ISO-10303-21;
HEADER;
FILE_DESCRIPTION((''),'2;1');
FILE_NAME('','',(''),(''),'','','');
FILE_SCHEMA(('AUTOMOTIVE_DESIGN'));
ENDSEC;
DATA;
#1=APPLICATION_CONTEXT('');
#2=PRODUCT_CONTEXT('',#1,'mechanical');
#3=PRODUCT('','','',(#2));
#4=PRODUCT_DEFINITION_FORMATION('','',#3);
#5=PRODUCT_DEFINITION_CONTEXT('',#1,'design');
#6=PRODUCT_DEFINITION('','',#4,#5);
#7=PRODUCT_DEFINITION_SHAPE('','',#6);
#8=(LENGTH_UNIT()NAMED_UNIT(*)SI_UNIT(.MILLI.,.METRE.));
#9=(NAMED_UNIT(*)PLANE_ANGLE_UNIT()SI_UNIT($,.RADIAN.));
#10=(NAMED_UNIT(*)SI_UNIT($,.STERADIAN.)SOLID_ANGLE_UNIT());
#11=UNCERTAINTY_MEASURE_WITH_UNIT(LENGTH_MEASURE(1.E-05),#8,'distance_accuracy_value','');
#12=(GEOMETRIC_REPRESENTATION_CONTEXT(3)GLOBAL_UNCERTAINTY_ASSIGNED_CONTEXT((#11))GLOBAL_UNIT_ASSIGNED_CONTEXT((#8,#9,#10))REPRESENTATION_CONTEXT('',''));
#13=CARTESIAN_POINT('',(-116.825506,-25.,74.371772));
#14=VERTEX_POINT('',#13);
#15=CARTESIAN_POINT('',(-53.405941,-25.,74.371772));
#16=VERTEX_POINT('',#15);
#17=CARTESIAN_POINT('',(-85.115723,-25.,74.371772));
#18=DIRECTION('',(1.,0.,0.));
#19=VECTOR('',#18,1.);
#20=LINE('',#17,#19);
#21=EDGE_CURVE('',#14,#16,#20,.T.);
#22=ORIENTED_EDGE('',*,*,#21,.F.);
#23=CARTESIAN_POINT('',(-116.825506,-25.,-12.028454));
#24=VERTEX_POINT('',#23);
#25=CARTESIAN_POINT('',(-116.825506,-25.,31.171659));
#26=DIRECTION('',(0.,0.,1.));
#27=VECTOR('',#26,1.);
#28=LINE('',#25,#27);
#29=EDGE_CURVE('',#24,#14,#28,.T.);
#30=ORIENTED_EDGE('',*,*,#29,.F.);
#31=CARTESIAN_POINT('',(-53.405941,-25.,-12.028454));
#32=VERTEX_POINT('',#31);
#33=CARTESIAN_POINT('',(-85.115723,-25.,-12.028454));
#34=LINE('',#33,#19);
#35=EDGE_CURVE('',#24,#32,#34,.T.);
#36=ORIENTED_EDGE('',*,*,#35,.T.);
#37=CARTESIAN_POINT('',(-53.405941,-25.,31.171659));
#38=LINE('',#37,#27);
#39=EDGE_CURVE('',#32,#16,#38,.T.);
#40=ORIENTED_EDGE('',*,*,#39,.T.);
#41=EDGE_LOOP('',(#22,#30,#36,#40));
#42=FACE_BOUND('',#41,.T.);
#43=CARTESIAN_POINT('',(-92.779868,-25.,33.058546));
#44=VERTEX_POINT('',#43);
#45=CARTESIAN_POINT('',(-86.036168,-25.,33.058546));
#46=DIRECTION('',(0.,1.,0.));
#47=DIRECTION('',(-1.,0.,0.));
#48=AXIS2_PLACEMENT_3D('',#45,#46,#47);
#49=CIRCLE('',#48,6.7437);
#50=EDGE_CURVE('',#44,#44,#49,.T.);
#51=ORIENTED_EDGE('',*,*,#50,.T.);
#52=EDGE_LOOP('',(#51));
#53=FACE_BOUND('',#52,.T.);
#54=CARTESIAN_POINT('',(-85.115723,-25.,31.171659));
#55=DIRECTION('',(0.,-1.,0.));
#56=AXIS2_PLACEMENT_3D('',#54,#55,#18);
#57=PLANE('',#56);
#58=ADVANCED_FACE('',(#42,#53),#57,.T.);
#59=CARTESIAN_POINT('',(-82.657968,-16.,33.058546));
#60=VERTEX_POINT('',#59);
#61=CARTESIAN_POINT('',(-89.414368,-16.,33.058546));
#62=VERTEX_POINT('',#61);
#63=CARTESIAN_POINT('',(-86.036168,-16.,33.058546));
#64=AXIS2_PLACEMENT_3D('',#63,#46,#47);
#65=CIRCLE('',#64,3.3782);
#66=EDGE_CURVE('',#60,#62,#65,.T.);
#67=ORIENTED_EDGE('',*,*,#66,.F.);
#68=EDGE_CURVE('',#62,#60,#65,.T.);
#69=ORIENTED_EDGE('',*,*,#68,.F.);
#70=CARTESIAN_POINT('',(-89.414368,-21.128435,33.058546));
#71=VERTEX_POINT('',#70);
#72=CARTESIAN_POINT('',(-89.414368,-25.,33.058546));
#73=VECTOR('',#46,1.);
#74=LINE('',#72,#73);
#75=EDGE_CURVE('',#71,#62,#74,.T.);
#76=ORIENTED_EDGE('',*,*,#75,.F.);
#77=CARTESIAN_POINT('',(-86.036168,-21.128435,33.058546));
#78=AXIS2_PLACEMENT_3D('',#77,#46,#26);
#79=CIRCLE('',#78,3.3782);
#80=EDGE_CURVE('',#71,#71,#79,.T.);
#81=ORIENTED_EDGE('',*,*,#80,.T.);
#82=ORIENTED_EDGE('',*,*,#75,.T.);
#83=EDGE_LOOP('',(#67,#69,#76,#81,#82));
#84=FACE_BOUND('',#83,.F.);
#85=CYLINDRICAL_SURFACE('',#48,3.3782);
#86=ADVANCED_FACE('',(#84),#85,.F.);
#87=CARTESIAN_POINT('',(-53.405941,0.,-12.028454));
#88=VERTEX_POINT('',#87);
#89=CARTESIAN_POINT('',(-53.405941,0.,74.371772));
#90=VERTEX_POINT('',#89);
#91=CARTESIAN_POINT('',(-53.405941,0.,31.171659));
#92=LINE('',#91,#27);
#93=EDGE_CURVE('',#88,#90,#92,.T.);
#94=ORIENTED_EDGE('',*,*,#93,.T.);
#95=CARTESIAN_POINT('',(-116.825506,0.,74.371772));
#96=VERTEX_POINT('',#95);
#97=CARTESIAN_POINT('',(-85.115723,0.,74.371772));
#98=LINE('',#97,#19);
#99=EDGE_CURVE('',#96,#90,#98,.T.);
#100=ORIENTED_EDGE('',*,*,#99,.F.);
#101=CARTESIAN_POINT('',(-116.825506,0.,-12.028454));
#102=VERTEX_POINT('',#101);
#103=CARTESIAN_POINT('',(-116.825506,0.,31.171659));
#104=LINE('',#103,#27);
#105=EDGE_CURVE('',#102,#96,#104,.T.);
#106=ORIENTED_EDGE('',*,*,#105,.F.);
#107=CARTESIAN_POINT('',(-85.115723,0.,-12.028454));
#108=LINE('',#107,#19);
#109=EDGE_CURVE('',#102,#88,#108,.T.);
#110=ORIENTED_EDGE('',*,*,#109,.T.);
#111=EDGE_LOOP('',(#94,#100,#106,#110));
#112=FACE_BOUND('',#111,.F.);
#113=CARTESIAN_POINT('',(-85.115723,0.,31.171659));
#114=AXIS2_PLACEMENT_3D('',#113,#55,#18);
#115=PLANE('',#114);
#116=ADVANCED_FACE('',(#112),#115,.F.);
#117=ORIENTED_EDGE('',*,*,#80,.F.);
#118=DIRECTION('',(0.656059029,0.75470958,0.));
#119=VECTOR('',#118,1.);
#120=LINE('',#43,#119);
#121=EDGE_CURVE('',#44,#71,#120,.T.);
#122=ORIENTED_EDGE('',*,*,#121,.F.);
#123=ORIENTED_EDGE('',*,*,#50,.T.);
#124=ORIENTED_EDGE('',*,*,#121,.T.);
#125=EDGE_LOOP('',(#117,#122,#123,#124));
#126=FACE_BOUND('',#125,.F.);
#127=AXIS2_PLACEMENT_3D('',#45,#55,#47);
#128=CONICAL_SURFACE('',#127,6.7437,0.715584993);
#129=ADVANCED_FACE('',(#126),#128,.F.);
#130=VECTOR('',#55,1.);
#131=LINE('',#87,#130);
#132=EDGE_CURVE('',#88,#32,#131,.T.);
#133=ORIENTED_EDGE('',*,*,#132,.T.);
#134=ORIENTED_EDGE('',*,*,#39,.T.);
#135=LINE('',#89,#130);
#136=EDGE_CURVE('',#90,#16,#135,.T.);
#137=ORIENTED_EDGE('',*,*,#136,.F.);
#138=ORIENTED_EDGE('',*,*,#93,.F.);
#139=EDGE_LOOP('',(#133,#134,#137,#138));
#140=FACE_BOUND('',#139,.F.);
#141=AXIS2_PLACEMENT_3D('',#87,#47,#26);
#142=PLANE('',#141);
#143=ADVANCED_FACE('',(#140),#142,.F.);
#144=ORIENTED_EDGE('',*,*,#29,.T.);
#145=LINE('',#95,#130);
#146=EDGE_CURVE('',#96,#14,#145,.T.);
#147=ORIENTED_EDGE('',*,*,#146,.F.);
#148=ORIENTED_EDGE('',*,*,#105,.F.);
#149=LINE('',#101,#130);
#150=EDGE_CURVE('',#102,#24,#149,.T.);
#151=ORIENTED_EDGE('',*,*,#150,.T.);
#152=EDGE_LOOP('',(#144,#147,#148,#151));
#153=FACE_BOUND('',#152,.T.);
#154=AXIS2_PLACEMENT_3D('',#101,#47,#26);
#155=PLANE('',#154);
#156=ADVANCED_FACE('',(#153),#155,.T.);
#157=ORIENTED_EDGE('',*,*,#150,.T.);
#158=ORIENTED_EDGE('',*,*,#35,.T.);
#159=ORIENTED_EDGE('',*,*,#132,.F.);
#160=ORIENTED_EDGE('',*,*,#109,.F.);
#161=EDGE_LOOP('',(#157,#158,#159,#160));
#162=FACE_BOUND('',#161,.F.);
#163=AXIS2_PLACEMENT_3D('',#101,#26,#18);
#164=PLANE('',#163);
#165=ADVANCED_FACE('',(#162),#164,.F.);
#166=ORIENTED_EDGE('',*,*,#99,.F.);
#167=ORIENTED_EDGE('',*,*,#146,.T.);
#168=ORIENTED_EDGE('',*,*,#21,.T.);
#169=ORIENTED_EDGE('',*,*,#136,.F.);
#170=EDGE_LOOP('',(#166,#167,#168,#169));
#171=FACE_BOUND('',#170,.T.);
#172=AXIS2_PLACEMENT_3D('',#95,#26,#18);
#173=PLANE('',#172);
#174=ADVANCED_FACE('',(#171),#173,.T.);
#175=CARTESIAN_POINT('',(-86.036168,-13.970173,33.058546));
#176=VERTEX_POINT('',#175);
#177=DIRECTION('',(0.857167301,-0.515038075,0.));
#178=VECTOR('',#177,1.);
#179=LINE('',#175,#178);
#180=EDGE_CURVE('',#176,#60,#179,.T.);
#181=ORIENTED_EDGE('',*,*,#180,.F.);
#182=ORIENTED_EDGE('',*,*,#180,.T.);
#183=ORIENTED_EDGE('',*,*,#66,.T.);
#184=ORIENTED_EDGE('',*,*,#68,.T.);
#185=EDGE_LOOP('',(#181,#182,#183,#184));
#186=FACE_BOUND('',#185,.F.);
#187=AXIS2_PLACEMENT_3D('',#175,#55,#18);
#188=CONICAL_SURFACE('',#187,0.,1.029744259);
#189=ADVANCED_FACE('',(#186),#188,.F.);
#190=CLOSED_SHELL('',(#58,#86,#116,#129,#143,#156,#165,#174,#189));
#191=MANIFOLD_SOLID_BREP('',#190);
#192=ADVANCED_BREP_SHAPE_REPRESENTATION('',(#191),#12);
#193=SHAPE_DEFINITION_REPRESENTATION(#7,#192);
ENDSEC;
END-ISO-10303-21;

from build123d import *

# Parameters (mm, degrees)
F0_W           = 63.4195655584
F0_H           = 86.4002257586
F1_DEPTH       = 25
F3_D           = 6.7564
F3_DEPTH       = 9
F3_CSINK_D     = 13.4874
F3_CSINK_ANGLE = 82
F3_TIP         = 2.0298273432


# Not quite as in the source:
# - the program builds the solid bodies; features that only make, move or delete a surface that nothing else refers to are left out


with BuildPart() as f1:
    # F0 (on Front) → F1 (new body)
    with BuildSketch(Plane.XZ):
        with Locations((-85.1157233119, 31.1716590077)):
            Rectangle(F0_W, F0_H)
    extrude(amount=F1_DEPTH)

    # F3
    with Locations(Plane.XZ.offset(25)):
        with Locations((-86.0361680388, 33.0585464835)):
            CounterSinkHole(F3_D / 2, F3_CSINK_D / 2, depth=F3_DEPTH, counter_sink_angle=F3_CSINK_ANGLE)
            with Locations((0, 0, -(F3_DEPTH + F3_TIP / 2))):  # 118° drill point
                Cone(0, F3_D / 2, F3_TIP, mode=Mode.SUBTRACT)


solid = f1.part
